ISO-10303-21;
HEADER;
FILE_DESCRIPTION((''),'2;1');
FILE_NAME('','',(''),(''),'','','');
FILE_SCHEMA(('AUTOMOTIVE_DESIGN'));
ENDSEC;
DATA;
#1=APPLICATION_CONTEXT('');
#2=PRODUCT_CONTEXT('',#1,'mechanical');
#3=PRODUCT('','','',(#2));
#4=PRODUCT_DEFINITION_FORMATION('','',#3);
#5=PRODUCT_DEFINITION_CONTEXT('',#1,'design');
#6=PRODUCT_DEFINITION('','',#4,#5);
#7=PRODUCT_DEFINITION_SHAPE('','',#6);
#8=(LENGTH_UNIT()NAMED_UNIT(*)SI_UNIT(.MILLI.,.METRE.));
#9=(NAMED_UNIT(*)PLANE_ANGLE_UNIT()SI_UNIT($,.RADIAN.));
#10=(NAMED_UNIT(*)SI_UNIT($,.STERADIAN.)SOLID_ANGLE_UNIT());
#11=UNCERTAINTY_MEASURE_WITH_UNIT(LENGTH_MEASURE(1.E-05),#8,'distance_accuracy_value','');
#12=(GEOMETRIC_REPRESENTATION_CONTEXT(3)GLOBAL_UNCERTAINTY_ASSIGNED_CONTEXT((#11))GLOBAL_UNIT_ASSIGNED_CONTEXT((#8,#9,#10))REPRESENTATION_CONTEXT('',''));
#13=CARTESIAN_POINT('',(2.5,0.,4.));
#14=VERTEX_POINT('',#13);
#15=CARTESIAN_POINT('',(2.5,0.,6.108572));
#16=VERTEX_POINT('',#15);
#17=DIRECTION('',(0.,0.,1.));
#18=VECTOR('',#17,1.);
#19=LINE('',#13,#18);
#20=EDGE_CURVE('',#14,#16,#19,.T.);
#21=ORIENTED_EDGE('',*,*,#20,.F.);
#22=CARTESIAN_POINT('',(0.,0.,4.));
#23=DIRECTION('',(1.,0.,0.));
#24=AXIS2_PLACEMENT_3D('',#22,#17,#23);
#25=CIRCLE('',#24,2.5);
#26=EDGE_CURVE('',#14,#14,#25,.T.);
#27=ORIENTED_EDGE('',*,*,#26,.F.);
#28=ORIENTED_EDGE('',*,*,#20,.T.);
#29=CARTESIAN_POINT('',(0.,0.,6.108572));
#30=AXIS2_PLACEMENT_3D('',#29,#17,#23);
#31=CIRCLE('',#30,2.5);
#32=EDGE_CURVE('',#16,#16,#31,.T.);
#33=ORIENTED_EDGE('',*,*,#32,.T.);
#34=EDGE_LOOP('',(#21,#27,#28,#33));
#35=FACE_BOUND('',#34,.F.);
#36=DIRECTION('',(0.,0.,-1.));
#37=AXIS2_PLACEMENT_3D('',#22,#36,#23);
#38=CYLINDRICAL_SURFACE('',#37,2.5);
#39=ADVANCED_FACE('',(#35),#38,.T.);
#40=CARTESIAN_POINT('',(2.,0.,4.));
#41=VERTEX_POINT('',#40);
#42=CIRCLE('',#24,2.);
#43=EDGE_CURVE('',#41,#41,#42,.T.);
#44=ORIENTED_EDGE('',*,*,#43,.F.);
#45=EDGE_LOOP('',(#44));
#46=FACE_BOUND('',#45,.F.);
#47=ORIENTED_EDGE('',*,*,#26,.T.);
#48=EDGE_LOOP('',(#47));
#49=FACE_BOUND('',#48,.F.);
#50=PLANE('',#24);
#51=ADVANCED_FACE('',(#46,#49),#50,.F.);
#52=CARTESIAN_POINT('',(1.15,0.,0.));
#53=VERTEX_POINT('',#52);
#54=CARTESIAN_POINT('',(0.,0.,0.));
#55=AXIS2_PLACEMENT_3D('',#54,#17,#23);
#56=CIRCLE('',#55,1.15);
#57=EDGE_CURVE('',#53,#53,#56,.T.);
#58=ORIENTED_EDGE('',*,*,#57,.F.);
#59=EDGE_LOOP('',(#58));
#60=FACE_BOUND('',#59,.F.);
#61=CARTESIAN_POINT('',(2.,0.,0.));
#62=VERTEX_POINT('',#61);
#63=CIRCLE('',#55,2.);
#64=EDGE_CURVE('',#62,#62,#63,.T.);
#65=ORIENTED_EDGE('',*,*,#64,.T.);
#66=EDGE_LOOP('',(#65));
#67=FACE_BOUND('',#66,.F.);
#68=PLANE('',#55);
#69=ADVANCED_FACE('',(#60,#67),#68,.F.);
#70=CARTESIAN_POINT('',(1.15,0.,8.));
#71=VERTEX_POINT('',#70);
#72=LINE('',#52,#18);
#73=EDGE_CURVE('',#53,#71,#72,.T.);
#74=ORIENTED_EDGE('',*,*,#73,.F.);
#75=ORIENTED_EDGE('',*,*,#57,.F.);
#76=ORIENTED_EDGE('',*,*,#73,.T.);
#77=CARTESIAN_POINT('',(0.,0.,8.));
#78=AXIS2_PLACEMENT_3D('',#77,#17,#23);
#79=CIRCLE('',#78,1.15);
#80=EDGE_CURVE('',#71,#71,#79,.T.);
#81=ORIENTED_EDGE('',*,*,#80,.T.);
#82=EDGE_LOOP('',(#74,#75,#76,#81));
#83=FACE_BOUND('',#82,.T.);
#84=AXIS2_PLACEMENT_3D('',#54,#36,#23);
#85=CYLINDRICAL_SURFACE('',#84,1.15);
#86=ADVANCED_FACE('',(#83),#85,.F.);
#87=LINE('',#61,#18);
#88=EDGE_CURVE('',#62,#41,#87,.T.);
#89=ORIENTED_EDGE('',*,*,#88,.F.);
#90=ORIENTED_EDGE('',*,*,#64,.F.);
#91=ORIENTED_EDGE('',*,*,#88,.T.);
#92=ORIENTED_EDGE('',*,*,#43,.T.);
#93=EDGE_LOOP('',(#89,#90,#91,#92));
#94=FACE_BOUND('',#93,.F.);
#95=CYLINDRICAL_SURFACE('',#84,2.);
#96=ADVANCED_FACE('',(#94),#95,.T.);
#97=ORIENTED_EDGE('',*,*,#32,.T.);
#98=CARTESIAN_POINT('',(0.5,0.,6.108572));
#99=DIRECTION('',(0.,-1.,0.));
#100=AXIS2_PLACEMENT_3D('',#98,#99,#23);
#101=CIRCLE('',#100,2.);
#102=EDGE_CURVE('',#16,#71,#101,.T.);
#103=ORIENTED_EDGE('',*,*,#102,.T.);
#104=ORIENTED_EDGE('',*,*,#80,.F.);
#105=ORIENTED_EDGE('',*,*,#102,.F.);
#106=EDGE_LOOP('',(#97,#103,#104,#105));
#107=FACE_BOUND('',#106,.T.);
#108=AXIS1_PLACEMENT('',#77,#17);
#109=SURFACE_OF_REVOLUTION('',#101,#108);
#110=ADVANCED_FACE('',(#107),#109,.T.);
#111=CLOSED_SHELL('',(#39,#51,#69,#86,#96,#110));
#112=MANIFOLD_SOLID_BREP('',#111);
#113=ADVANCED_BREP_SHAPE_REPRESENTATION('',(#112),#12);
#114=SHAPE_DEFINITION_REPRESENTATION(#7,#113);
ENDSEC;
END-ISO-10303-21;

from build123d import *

# Parameters (mm, degrees)
F0_R     = 2
F0_R_2   = 1.15
F1_DEPTH = 8
F3_R     = 2.5
F3_R_2   = 2
F4_DEPTH = 4


# Not quite as in the source:
# - a fillet or chamfer that OpenCascade refuses, or shapes differently, is made with other operations: its cross-section is extruded or revolved along the edge and cut away or added


with BuildPart() as f1:
    # F0 (on Top) → F1 (new body)
    with BuildSketch(Plane.XY):
        Circle(F0_R)
        Circle(F0_R_2, mode=Mode.SUBTRACT)
    extrude(amount=F1_DEPTH)

    # F3 (on offset) → F4 (join, through all)
    with BuildSketch(Plane.XY.offset(4)):
        Circle(F3_R)
        Circle(F3_R_2, mode=Mode.SUBTRACT)
    extrude(amount=F4_DEPTH)

    # F5: fillet of radius 2 on 1 edges, made by hand

    # F5_s1 → F5_t2 (revolve, cut)
    with BuildSketch(Plane.XZ):
        with BuildLine():
            ThreePointArc((2.5, 6.1085719681), (2.1278820596, 7.2704669719), (1.15, 8))
            Line((1.15, 8), (2.5, 8))
            Line((2.5, 8), (2.5, 6.1085719681))
        make_face()
    revolve(axis=Axis((0, 0, 8), (0, 0, 1)), mode=Mode.SUBTRACT)


solid = f1.part
